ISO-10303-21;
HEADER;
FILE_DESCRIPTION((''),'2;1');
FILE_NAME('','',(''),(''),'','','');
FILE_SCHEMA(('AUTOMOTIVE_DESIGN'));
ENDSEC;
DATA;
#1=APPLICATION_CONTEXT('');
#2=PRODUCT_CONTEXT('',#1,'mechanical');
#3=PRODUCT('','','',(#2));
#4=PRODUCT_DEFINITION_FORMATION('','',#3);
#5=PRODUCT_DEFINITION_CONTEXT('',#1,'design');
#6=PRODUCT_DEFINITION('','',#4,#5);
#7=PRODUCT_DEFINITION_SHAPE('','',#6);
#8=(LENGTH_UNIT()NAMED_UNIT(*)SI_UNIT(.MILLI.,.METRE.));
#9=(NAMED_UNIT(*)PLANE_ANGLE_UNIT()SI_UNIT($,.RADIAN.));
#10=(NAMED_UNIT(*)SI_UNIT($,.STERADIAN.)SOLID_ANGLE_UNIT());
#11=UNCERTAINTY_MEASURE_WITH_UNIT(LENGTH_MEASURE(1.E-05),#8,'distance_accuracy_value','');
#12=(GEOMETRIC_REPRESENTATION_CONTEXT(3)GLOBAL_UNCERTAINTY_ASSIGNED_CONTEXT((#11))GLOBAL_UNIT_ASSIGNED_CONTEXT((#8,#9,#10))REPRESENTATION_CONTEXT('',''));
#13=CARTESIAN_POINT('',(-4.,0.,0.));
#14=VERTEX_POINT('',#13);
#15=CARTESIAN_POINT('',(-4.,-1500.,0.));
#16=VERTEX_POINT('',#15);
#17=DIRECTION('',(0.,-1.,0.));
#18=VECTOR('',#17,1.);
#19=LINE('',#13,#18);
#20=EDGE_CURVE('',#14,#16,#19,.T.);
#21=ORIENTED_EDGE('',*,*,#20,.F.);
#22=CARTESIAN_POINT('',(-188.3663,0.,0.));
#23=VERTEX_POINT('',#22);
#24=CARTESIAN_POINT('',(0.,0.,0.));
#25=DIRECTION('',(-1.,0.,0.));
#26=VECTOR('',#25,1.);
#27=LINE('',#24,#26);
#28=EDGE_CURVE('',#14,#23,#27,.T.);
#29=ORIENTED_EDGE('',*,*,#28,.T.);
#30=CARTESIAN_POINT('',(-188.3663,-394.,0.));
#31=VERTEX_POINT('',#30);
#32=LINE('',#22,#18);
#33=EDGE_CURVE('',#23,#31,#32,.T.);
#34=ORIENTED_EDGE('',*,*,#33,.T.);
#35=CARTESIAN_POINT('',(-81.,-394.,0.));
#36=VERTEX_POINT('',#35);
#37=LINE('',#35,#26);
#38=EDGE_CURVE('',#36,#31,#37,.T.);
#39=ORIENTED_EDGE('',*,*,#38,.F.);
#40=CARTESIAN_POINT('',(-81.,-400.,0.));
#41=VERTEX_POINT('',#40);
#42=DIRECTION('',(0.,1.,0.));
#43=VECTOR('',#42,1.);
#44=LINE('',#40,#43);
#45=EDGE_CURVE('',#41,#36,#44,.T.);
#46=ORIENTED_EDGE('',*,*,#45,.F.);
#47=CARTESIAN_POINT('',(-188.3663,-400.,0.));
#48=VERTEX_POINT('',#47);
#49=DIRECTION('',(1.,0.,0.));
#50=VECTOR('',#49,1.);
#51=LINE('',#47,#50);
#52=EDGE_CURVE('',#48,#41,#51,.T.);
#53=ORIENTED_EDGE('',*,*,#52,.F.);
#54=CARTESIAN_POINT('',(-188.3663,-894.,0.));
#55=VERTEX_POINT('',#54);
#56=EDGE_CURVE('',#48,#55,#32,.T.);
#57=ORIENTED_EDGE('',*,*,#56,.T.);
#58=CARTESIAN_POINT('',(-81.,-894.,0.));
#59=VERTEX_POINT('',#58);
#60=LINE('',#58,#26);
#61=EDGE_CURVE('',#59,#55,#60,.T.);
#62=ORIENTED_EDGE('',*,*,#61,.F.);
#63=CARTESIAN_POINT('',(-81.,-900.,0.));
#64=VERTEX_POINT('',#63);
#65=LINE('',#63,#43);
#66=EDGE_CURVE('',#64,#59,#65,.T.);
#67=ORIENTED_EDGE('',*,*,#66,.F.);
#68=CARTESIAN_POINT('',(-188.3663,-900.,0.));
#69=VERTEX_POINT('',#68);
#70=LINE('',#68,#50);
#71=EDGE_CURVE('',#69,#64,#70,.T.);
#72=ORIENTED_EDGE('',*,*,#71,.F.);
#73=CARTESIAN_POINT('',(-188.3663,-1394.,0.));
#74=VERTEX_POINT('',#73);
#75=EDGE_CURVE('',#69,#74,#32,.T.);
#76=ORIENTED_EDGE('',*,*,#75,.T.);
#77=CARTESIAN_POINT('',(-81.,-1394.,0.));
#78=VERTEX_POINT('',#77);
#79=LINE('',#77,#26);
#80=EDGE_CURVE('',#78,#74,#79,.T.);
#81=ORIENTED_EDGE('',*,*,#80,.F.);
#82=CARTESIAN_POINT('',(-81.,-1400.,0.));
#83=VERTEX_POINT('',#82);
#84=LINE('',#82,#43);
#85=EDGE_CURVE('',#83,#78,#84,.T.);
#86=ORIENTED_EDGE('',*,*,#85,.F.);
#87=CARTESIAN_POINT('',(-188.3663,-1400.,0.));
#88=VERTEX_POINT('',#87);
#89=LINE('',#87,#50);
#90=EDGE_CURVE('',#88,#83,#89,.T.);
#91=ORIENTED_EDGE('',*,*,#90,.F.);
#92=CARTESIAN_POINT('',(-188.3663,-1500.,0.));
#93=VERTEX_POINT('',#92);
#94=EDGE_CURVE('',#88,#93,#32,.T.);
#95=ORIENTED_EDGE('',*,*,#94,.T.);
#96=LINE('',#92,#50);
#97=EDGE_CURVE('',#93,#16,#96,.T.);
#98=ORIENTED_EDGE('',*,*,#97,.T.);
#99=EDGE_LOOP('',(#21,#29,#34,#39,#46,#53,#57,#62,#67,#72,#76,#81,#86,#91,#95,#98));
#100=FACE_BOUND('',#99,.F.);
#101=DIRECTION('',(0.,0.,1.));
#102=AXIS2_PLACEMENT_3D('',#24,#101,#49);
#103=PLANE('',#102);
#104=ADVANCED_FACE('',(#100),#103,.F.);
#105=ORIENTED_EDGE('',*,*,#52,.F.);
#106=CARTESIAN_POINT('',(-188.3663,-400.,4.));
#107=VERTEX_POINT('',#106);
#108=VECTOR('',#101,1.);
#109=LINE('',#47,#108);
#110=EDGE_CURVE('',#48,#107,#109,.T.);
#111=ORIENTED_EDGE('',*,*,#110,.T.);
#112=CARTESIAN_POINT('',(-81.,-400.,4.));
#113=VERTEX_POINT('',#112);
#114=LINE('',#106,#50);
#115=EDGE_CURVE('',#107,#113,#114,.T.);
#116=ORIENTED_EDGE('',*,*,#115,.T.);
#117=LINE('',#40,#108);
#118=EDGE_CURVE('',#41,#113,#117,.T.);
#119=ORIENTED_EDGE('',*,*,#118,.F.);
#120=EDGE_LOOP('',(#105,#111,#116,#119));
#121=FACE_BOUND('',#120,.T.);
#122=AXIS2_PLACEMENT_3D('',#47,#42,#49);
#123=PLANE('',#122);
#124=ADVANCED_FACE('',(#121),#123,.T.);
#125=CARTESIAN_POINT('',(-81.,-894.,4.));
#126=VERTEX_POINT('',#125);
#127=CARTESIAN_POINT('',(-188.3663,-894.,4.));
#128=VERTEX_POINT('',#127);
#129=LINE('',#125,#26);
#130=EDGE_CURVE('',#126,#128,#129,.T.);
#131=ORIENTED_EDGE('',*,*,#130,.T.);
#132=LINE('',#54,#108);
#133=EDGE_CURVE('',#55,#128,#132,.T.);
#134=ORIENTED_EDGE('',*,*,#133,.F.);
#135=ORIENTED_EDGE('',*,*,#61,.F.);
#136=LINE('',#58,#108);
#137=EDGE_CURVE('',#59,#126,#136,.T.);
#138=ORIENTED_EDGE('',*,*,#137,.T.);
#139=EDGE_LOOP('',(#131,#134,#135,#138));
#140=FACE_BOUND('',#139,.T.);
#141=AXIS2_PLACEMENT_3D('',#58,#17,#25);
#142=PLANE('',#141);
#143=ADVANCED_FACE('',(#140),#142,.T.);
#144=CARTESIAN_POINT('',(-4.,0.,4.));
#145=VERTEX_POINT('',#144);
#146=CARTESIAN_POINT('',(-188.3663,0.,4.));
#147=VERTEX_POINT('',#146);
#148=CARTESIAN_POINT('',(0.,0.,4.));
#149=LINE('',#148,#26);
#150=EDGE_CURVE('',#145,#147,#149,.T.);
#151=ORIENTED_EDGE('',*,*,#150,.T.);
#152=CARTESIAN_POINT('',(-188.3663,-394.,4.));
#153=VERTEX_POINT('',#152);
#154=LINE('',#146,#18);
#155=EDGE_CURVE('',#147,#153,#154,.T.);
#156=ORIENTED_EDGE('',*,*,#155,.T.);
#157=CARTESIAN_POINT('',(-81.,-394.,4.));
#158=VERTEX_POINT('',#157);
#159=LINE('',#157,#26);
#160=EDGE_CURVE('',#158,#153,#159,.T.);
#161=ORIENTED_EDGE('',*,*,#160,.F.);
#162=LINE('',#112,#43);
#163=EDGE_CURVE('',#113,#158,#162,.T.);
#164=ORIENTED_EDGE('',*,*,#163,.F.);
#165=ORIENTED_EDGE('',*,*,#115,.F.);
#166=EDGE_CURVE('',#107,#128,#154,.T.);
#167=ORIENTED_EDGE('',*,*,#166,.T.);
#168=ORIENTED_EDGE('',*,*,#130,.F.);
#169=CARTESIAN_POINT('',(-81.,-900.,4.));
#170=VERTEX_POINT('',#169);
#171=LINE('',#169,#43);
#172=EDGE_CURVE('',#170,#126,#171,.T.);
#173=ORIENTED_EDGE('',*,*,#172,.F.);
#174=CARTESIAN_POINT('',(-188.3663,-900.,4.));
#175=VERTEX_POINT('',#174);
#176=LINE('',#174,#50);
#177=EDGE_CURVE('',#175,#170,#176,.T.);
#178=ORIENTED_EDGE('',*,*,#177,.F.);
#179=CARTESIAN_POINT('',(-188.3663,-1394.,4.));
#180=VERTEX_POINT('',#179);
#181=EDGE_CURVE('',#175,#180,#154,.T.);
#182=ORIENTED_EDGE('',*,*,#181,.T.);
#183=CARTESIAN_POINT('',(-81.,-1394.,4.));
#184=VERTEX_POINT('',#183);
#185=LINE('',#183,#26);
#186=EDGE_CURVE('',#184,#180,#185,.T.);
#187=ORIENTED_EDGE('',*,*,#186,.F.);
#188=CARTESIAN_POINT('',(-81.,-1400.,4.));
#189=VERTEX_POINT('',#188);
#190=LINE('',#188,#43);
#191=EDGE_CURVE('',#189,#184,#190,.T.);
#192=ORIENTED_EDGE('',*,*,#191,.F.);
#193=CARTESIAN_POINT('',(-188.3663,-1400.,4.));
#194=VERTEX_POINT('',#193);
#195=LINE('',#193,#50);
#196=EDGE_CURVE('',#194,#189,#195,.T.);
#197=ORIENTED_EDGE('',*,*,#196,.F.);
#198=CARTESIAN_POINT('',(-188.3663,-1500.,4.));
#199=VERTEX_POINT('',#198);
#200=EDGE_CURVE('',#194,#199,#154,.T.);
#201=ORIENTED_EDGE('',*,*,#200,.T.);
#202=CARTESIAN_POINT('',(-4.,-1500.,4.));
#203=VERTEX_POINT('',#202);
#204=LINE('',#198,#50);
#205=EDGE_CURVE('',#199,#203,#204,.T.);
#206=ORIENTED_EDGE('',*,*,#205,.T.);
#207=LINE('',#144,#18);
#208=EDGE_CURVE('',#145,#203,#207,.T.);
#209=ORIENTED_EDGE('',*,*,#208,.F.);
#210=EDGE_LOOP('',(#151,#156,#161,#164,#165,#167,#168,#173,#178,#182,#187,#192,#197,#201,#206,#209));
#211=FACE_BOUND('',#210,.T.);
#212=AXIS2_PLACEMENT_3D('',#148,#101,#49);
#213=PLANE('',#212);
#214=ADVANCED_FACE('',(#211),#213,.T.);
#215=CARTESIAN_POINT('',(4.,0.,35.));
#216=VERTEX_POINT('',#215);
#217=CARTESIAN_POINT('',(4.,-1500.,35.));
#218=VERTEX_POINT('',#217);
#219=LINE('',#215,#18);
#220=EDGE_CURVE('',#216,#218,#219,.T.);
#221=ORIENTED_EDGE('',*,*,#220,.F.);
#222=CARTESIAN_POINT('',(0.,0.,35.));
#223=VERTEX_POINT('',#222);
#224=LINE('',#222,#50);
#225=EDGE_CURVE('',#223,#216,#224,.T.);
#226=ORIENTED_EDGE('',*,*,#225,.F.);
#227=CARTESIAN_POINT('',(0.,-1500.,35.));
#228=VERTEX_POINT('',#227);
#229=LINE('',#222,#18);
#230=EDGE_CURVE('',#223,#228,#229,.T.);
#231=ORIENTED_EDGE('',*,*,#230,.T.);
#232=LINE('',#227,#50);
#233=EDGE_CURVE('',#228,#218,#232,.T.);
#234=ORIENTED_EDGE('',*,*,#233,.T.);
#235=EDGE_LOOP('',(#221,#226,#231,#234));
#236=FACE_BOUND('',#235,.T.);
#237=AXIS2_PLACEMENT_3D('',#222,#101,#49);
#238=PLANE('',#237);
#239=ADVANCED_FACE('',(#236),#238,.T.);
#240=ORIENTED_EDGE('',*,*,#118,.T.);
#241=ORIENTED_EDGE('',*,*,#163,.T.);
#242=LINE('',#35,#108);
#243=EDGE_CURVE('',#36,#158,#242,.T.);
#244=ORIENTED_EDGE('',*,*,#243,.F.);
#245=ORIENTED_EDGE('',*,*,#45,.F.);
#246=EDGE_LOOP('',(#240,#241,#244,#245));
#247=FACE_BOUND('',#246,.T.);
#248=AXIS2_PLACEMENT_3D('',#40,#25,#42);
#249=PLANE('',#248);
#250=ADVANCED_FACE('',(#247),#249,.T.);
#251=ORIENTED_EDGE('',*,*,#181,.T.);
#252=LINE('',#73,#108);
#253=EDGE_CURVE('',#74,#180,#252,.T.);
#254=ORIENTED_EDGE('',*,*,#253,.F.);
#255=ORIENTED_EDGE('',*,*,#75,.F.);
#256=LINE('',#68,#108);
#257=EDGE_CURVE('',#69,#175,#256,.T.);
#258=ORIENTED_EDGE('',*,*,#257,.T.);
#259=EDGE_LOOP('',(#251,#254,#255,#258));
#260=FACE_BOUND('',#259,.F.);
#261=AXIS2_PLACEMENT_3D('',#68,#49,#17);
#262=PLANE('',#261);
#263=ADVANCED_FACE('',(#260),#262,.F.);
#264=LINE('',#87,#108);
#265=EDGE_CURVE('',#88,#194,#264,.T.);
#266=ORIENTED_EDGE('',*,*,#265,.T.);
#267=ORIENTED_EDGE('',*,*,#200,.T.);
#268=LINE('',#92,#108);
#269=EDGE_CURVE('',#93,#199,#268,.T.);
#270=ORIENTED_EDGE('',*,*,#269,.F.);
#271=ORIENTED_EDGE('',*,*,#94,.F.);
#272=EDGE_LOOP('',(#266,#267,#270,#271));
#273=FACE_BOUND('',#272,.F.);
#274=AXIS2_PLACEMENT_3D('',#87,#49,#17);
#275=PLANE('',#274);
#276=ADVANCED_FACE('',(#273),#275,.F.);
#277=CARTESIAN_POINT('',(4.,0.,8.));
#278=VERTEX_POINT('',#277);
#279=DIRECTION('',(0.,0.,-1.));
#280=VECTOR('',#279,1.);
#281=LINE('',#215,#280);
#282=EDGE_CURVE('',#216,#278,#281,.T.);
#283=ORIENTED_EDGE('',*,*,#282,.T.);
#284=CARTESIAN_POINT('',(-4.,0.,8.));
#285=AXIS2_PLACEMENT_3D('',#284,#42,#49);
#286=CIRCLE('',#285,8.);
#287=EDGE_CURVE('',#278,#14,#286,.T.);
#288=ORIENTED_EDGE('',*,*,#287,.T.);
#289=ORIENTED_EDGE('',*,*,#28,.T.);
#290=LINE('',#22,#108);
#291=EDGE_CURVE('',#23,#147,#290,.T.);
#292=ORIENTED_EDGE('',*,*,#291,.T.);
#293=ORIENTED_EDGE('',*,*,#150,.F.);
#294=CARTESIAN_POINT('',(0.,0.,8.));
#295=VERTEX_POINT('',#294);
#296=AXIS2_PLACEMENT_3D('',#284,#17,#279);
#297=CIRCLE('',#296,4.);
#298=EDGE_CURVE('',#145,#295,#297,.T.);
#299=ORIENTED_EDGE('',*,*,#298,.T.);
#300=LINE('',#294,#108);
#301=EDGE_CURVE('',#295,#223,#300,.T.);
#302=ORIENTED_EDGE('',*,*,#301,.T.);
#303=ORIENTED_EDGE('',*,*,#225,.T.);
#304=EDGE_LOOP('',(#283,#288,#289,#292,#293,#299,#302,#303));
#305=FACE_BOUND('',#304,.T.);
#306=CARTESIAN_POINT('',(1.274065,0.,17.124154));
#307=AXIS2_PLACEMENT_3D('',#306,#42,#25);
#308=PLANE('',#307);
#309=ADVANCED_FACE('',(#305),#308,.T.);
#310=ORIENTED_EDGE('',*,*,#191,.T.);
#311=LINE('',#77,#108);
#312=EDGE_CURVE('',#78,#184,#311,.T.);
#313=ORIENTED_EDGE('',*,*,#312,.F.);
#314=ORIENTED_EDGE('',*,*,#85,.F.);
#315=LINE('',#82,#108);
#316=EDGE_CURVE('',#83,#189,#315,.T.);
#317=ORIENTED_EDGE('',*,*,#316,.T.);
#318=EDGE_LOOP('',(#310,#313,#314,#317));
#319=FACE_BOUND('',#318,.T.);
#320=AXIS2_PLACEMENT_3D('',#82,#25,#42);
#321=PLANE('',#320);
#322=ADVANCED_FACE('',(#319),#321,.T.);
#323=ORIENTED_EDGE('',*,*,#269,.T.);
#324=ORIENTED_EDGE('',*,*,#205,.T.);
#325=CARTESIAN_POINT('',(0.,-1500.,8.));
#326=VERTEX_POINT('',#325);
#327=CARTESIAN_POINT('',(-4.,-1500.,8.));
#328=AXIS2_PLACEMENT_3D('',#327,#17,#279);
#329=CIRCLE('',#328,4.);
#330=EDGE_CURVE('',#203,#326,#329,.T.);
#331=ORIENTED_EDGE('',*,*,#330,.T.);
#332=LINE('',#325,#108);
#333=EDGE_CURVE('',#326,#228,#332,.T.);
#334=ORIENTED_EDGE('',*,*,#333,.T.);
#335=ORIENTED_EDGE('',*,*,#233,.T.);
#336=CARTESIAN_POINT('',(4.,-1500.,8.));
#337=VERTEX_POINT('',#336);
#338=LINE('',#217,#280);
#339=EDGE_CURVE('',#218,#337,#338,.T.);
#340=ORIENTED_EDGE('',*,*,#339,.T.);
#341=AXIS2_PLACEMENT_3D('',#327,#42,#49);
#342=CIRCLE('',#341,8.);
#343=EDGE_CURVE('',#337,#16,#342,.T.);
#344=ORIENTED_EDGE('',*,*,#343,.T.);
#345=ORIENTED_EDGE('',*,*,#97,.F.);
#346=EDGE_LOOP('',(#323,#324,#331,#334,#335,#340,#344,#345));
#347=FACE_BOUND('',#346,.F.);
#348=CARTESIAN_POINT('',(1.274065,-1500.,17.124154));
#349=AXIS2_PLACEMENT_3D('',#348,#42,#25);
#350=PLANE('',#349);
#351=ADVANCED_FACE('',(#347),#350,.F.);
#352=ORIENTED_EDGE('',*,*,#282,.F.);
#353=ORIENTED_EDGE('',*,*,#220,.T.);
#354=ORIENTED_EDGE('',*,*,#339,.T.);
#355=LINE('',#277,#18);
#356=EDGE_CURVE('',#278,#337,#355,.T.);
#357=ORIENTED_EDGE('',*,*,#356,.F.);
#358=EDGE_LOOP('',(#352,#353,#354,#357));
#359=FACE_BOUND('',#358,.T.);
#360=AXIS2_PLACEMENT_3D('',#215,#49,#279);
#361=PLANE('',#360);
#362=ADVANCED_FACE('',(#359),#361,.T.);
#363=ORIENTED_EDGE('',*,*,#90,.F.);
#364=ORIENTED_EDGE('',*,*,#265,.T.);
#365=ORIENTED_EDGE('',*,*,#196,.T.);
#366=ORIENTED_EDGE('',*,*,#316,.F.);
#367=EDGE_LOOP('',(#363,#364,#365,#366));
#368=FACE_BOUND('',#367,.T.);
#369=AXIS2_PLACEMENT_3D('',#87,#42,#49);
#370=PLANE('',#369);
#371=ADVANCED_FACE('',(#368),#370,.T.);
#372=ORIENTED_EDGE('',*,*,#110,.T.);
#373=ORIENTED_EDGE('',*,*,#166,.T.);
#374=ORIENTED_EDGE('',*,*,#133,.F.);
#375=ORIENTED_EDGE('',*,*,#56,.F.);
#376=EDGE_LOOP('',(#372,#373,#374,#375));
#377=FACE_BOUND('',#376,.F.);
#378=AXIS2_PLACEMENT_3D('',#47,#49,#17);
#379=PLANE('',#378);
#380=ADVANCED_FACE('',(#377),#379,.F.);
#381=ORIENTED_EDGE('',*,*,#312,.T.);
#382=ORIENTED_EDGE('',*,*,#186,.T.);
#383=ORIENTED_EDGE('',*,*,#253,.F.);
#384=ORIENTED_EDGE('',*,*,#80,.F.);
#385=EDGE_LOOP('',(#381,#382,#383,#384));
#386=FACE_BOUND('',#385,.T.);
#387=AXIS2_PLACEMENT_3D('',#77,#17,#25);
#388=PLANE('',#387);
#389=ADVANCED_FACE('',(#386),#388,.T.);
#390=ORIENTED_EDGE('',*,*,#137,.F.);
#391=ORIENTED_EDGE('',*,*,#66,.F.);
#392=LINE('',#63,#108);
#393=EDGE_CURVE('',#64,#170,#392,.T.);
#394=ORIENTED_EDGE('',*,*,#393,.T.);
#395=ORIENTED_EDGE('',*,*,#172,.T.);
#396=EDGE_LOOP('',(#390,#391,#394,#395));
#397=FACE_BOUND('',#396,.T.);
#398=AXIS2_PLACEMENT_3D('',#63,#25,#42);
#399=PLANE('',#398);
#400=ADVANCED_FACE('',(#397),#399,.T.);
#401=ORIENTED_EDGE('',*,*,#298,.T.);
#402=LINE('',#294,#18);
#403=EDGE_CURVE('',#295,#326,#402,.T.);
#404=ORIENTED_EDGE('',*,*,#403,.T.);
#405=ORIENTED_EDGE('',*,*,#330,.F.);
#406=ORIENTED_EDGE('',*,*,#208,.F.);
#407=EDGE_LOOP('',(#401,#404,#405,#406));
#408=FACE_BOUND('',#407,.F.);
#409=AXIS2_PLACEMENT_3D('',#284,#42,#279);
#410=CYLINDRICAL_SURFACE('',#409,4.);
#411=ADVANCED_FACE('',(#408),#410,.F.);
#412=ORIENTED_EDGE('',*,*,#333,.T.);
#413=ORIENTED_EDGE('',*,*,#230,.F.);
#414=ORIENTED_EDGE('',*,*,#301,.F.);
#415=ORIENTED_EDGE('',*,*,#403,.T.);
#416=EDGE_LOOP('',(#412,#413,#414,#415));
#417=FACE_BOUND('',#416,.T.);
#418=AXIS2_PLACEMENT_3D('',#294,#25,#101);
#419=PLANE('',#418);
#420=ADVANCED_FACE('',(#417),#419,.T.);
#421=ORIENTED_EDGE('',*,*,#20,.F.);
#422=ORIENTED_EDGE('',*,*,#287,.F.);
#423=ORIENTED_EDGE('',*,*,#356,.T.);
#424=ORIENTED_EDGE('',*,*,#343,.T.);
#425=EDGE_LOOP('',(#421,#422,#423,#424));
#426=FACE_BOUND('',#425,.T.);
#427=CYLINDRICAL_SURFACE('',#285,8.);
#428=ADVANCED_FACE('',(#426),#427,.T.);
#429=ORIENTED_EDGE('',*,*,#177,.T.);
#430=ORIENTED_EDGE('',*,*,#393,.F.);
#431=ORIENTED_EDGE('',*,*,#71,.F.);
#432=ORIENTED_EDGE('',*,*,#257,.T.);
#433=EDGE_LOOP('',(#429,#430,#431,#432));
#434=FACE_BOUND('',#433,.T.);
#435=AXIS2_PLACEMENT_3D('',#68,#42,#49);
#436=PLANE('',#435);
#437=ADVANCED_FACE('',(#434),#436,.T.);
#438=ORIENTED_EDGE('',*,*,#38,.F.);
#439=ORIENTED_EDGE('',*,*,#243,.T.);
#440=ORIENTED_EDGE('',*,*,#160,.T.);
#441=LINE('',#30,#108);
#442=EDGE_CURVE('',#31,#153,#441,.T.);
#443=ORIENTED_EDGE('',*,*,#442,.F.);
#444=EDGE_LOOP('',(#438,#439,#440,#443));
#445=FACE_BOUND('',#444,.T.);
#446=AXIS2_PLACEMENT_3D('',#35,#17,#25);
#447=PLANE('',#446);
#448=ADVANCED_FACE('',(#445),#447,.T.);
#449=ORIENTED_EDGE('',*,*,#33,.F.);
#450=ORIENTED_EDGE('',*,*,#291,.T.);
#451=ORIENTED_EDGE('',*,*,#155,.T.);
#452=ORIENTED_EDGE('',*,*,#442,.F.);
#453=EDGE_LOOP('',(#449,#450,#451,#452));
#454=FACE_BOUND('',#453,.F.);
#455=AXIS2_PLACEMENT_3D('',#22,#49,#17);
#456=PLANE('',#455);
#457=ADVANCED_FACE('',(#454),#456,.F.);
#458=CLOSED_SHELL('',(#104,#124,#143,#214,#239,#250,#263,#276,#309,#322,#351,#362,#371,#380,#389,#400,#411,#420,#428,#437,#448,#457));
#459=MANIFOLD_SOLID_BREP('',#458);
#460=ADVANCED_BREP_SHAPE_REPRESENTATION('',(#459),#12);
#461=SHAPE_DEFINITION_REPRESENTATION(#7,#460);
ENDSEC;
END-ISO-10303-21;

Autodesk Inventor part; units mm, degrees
ref_plane "YZ Plane" through (0, 0, 0) normal (1, 0, 0) x (0, 1, 0)
ref_plane "XZ Plane" through (0, 0, 0) normal (0, 1, 0) x (-1, 0, 0)
ref_plane "XY Plane" through (0, 0, 0) normal (0, 0, 1) x (1, 0, 0)
sketch "Sketch1" plane through (0, 0, 0) normal (0, 0, 1) x (1, 0, 0)
  line L0 (0, 0) -> (-188.3663, 0)
  line L1 (-188.3663, 0) -> (-188.3663, -1500)
  line L2 (-188.3663, -1500) -> (0, -1500)
  line L3 (0, -1500) -> (0, 0)
  line L4 (-188.3663, -1400) -> (-81, -1400)
  line L5 (-81, -1400) -> (-81, -1394)
  line L6 (-81, -1394) -> (-188.3663, -1394)
  line L7 (-188.3663, -1394) -> (-188.3663, -1400)
  line L8 (-188.3663, -900) -> (-81, -900)
  line L9 (-81, -900) -> (-81, -894)
  line L10 (-81, -894) -> (-188.3663, -894)
  line L11 (-188.3663, -894) -> (-188.3663, -900)
  line L12 (-188.3663, -400) -> (-81, -400)
  line L13 (-81, -400) -> (-81, -394)
  line L14 (-81, -394) -> (-188.3663, -394)
  line L15 (-188.3663, -394) -> (-188.3663, -400)
  dimension "d0" = 1500
  dimension "d1" = 188.3663
  dimension "d2" = 6
  dimension "d4" = 100
  dimension "d7" = 500
  dimension "d23" = 81
extrude "Plate1" add sketch "Sketch1" along normal blind 4 contours L3 L2 L1 L4 L5 L6 L8 L9 L10 L12 L13 L14 L0
sketch "Sketch2" plane through (4, 0, 0) normal (-1, 0, 0) x (0, -1, 0)
  line L0 (1500, 0) -> (0, 0)
  line L1 (0, 0) -> (0, 35)
  line L2 (0, 35) -> (1500, 35)
  line L3 (1500, 35) -> (1500, 0)
edge flange "Flange1" height 35 angle 90 thickness 4 bend radius 4 thickness toward (-1, 0, 0) relief tear relief width 4 relief depth 2 edges at (0, -750, 4) wall of the first edge with corners at (4, -1500, 0) (4, 0, 0) (4, 0, 35) (4, -1500, 35)
bend "Bend1"
corner "Corner1"
equation "\"d1\" = Stringer1_deep"
equation "\"d12\" = Thickness"
equation "\"d13\" = BendReliefWidth"
equation "\"d14\" = BendReliefDepth"
equation "\"d15\" = MinimumRemnant"
equation "\"d16\" = TransitionRadius"
equation "\"d19\" = BendRadius"
equation "\"d20\" = CornerReliefSize"
equation "\"d21\" = GapSize"
equation "\"d22\" = JacobiRadiusSize"
equation "\"BendRadius\" = Thickness"
equation "\"BendReliefWidth\" = Thickness"
equation "\"BendReliefDepth\" = 0.5 * Thickness"
equation "\"CornerReliefSize\" = 4 * Thickness"
equation "\"MinimumRemnant\" = 2 * Thickness"
equation "\"TransitionRadius\" = BendRadius"
equation "\"JacobiRadiusSize\" = BendRadius"
equation "\"GapSize\" = Thickness"
equation "\"Stringer1_deep\" = 188.36631"
equation "\"Thickness\" = 4"
properties part number "01.3 GBK stringer" material "Steel"
